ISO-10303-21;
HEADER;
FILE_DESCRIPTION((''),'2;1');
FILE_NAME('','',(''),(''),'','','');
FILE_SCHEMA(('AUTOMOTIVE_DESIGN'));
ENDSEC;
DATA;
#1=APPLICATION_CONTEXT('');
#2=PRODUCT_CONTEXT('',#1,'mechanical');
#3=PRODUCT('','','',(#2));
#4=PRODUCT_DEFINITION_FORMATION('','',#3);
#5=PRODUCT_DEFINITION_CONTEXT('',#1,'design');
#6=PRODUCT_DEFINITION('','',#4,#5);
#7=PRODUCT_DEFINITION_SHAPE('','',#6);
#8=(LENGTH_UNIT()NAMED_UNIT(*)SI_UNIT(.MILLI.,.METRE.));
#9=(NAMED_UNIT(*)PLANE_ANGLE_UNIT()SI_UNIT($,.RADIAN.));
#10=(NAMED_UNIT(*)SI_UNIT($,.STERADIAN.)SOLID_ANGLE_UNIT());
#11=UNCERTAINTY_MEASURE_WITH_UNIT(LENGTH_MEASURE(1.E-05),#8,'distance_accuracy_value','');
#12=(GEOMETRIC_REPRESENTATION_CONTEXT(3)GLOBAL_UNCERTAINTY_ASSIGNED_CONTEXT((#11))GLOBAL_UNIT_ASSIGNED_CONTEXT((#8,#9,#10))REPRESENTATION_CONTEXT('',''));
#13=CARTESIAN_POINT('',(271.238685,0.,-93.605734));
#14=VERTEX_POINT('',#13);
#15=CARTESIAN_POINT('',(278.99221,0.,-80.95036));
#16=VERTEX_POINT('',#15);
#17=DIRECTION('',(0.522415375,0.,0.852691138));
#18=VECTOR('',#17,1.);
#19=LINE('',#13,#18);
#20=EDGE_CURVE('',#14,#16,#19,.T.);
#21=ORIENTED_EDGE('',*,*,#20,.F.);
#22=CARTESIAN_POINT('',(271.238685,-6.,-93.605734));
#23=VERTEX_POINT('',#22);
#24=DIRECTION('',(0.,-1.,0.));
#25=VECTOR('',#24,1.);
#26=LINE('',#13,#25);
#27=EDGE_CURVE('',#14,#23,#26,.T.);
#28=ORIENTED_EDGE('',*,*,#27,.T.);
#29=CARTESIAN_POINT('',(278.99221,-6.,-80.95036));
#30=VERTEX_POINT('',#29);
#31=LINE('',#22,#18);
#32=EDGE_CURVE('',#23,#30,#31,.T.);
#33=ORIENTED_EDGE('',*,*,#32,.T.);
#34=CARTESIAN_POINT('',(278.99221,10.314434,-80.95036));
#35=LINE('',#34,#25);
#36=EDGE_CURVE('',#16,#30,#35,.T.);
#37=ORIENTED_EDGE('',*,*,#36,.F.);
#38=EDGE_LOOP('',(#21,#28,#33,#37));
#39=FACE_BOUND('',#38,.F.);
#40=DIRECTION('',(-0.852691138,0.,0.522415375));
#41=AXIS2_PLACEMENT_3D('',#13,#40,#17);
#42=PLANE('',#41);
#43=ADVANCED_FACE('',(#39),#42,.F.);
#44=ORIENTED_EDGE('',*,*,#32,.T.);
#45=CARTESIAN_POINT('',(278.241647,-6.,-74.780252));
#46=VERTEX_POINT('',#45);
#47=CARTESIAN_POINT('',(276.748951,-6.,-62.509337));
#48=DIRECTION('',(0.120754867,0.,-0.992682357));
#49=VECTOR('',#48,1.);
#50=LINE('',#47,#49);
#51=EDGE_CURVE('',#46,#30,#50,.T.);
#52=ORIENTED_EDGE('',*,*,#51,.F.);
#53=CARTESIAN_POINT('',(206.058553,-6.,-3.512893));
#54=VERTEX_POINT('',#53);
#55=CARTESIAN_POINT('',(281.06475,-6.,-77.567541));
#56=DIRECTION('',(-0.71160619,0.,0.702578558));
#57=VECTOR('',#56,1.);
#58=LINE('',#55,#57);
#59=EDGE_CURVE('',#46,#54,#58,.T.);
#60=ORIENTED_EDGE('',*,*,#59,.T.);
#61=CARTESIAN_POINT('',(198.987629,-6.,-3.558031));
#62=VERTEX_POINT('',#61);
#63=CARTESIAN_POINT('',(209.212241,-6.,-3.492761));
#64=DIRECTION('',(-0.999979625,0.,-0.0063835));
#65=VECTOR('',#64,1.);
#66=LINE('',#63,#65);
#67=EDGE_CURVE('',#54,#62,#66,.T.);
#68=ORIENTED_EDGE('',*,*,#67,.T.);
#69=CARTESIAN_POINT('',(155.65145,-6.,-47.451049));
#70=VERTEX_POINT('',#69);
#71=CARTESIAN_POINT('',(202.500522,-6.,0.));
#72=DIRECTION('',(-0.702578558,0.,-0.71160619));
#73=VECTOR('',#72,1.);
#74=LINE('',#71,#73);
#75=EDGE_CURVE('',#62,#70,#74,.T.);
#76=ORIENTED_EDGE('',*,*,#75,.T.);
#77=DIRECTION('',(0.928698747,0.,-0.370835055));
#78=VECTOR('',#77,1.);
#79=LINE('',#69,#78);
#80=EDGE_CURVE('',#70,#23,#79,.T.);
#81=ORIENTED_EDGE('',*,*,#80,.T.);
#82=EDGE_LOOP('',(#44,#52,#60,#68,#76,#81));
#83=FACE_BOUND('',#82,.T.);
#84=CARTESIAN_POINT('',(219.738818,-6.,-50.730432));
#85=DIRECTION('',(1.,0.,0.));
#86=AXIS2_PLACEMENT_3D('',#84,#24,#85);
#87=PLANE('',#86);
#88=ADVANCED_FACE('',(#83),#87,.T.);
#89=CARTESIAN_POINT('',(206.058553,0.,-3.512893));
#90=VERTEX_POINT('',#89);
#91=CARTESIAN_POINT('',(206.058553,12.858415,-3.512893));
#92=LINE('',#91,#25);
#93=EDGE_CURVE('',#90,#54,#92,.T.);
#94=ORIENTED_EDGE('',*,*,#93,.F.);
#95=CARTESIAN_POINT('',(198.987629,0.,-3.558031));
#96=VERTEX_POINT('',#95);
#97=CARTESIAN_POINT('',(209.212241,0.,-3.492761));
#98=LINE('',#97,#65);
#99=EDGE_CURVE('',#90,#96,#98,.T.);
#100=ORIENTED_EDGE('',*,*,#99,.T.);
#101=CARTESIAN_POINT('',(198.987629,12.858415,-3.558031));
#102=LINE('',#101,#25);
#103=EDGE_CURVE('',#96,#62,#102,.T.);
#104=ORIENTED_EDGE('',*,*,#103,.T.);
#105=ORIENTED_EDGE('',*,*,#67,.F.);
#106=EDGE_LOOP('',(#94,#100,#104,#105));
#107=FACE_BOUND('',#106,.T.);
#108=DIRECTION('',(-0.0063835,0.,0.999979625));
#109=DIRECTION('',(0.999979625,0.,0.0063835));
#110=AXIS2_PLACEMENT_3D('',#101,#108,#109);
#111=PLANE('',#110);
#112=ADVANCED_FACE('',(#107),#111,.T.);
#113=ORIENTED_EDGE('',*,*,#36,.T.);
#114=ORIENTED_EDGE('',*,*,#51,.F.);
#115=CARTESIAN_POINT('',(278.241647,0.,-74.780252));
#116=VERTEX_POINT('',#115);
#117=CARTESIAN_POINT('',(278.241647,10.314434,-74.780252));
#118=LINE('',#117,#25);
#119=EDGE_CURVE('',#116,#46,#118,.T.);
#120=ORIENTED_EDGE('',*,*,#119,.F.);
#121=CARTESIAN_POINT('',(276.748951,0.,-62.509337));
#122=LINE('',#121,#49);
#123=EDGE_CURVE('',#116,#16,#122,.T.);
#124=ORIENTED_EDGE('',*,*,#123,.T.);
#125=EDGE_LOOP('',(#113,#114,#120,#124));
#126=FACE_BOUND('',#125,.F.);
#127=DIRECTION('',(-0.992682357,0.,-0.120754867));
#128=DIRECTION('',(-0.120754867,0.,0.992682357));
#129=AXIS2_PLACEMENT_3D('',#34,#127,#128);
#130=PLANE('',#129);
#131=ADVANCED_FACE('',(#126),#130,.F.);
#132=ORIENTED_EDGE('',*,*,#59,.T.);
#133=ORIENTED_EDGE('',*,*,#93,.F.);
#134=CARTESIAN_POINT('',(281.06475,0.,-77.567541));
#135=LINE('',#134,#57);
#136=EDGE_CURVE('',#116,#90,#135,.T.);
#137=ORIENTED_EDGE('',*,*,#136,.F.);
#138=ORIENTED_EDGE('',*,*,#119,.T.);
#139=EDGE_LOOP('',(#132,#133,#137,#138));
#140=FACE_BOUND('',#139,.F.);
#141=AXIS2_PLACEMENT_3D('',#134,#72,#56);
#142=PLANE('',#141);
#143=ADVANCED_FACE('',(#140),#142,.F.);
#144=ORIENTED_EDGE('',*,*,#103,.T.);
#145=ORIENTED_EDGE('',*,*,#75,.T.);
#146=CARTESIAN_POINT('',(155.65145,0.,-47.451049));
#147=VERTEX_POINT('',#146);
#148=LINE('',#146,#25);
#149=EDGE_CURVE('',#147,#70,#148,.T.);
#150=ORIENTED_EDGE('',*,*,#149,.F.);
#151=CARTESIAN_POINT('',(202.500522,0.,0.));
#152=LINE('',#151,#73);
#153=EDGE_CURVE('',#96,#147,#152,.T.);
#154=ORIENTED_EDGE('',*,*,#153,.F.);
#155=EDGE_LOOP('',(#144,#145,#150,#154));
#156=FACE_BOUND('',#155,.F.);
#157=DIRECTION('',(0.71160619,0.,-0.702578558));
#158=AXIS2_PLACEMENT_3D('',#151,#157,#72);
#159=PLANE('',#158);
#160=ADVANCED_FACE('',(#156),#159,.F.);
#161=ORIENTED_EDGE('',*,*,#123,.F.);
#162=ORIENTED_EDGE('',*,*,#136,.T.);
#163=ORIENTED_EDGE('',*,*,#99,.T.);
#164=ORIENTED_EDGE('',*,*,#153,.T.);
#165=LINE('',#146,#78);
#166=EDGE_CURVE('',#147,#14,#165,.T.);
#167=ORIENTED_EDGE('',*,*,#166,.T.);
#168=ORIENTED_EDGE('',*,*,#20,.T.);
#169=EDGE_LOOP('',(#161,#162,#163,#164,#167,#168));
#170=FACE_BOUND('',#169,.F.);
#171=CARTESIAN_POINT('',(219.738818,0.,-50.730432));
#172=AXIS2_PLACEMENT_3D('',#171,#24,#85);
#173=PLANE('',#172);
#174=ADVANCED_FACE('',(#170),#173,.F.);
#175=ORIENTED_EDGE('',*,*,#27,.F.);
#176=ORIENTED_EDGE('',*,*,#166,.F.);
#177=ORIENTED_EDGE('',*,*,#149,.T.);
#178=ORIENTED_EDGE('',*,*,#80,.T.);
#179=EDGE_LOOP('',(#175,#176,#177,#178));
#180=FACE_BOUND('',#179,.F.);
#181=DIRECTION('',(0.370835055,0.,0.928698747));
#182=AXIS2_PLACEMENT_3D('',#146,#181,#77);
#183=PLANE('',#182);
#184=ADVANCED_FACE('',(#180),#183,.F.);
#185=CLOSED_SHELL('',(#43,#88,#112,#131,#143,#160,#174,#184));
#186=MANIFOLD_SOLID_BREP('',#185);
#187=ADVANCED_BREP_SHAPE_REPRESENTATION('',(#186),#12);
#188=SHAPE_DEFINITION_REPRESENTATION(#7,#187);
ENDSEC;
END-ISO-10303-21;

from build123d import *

# Parameters (mm, degrees)
F1_DEPTH    = 6
F2_T1_DEPTH = 31.7168298797
F2_T3_DEPTH = 26.6288680093


# Not quite as in the source:
# - a fillet or chamfer that OpenCascade refuses, or shapes differently, is made with other operations: its cross-section is extruded or revolved along the edge and cut away or added


with BuildPart() as f1:
    # F0 (on Front) → F1 (new body)
    with BuildSketch(Plane.XZ):
        Polygon((202.5005221367, 0), (155.6514501572, -47.4510490894), (271.2386846542, -93.6057344079), (281.0647502264, -77.5675406007), align=None)
    extrude(amount=F1_DEPTH)

    # F2: chamfer of 5 on 2 edges, made by hand

    # F2_s2 → F2_t1 (cut)
    with BuildSketch(Plane.XZ.offset(-12.8584149398)):
        Polygon((198.9876293479, -3.5580309518), (206.0585530885, -3.5128927888), (202.5005221367, 0), align=None)
    extrude(amount=F2_T1_DEPTH, mode=Mode.SUBTRACT)

    # F2_s4 → F2_t3 (cut)
    with BuildSketch(Plane.XZ.offset(-10.3144340046)):
        Polygon((278.9922098799, -80.9503598488), (278.2416469809, -74.7802520225), (281.0647502264, -77.5675406007), align=None)
    extrude(amount=F2_T3_DEPTH, mode=Mode.SUBTRACT)


solid = f1.part
